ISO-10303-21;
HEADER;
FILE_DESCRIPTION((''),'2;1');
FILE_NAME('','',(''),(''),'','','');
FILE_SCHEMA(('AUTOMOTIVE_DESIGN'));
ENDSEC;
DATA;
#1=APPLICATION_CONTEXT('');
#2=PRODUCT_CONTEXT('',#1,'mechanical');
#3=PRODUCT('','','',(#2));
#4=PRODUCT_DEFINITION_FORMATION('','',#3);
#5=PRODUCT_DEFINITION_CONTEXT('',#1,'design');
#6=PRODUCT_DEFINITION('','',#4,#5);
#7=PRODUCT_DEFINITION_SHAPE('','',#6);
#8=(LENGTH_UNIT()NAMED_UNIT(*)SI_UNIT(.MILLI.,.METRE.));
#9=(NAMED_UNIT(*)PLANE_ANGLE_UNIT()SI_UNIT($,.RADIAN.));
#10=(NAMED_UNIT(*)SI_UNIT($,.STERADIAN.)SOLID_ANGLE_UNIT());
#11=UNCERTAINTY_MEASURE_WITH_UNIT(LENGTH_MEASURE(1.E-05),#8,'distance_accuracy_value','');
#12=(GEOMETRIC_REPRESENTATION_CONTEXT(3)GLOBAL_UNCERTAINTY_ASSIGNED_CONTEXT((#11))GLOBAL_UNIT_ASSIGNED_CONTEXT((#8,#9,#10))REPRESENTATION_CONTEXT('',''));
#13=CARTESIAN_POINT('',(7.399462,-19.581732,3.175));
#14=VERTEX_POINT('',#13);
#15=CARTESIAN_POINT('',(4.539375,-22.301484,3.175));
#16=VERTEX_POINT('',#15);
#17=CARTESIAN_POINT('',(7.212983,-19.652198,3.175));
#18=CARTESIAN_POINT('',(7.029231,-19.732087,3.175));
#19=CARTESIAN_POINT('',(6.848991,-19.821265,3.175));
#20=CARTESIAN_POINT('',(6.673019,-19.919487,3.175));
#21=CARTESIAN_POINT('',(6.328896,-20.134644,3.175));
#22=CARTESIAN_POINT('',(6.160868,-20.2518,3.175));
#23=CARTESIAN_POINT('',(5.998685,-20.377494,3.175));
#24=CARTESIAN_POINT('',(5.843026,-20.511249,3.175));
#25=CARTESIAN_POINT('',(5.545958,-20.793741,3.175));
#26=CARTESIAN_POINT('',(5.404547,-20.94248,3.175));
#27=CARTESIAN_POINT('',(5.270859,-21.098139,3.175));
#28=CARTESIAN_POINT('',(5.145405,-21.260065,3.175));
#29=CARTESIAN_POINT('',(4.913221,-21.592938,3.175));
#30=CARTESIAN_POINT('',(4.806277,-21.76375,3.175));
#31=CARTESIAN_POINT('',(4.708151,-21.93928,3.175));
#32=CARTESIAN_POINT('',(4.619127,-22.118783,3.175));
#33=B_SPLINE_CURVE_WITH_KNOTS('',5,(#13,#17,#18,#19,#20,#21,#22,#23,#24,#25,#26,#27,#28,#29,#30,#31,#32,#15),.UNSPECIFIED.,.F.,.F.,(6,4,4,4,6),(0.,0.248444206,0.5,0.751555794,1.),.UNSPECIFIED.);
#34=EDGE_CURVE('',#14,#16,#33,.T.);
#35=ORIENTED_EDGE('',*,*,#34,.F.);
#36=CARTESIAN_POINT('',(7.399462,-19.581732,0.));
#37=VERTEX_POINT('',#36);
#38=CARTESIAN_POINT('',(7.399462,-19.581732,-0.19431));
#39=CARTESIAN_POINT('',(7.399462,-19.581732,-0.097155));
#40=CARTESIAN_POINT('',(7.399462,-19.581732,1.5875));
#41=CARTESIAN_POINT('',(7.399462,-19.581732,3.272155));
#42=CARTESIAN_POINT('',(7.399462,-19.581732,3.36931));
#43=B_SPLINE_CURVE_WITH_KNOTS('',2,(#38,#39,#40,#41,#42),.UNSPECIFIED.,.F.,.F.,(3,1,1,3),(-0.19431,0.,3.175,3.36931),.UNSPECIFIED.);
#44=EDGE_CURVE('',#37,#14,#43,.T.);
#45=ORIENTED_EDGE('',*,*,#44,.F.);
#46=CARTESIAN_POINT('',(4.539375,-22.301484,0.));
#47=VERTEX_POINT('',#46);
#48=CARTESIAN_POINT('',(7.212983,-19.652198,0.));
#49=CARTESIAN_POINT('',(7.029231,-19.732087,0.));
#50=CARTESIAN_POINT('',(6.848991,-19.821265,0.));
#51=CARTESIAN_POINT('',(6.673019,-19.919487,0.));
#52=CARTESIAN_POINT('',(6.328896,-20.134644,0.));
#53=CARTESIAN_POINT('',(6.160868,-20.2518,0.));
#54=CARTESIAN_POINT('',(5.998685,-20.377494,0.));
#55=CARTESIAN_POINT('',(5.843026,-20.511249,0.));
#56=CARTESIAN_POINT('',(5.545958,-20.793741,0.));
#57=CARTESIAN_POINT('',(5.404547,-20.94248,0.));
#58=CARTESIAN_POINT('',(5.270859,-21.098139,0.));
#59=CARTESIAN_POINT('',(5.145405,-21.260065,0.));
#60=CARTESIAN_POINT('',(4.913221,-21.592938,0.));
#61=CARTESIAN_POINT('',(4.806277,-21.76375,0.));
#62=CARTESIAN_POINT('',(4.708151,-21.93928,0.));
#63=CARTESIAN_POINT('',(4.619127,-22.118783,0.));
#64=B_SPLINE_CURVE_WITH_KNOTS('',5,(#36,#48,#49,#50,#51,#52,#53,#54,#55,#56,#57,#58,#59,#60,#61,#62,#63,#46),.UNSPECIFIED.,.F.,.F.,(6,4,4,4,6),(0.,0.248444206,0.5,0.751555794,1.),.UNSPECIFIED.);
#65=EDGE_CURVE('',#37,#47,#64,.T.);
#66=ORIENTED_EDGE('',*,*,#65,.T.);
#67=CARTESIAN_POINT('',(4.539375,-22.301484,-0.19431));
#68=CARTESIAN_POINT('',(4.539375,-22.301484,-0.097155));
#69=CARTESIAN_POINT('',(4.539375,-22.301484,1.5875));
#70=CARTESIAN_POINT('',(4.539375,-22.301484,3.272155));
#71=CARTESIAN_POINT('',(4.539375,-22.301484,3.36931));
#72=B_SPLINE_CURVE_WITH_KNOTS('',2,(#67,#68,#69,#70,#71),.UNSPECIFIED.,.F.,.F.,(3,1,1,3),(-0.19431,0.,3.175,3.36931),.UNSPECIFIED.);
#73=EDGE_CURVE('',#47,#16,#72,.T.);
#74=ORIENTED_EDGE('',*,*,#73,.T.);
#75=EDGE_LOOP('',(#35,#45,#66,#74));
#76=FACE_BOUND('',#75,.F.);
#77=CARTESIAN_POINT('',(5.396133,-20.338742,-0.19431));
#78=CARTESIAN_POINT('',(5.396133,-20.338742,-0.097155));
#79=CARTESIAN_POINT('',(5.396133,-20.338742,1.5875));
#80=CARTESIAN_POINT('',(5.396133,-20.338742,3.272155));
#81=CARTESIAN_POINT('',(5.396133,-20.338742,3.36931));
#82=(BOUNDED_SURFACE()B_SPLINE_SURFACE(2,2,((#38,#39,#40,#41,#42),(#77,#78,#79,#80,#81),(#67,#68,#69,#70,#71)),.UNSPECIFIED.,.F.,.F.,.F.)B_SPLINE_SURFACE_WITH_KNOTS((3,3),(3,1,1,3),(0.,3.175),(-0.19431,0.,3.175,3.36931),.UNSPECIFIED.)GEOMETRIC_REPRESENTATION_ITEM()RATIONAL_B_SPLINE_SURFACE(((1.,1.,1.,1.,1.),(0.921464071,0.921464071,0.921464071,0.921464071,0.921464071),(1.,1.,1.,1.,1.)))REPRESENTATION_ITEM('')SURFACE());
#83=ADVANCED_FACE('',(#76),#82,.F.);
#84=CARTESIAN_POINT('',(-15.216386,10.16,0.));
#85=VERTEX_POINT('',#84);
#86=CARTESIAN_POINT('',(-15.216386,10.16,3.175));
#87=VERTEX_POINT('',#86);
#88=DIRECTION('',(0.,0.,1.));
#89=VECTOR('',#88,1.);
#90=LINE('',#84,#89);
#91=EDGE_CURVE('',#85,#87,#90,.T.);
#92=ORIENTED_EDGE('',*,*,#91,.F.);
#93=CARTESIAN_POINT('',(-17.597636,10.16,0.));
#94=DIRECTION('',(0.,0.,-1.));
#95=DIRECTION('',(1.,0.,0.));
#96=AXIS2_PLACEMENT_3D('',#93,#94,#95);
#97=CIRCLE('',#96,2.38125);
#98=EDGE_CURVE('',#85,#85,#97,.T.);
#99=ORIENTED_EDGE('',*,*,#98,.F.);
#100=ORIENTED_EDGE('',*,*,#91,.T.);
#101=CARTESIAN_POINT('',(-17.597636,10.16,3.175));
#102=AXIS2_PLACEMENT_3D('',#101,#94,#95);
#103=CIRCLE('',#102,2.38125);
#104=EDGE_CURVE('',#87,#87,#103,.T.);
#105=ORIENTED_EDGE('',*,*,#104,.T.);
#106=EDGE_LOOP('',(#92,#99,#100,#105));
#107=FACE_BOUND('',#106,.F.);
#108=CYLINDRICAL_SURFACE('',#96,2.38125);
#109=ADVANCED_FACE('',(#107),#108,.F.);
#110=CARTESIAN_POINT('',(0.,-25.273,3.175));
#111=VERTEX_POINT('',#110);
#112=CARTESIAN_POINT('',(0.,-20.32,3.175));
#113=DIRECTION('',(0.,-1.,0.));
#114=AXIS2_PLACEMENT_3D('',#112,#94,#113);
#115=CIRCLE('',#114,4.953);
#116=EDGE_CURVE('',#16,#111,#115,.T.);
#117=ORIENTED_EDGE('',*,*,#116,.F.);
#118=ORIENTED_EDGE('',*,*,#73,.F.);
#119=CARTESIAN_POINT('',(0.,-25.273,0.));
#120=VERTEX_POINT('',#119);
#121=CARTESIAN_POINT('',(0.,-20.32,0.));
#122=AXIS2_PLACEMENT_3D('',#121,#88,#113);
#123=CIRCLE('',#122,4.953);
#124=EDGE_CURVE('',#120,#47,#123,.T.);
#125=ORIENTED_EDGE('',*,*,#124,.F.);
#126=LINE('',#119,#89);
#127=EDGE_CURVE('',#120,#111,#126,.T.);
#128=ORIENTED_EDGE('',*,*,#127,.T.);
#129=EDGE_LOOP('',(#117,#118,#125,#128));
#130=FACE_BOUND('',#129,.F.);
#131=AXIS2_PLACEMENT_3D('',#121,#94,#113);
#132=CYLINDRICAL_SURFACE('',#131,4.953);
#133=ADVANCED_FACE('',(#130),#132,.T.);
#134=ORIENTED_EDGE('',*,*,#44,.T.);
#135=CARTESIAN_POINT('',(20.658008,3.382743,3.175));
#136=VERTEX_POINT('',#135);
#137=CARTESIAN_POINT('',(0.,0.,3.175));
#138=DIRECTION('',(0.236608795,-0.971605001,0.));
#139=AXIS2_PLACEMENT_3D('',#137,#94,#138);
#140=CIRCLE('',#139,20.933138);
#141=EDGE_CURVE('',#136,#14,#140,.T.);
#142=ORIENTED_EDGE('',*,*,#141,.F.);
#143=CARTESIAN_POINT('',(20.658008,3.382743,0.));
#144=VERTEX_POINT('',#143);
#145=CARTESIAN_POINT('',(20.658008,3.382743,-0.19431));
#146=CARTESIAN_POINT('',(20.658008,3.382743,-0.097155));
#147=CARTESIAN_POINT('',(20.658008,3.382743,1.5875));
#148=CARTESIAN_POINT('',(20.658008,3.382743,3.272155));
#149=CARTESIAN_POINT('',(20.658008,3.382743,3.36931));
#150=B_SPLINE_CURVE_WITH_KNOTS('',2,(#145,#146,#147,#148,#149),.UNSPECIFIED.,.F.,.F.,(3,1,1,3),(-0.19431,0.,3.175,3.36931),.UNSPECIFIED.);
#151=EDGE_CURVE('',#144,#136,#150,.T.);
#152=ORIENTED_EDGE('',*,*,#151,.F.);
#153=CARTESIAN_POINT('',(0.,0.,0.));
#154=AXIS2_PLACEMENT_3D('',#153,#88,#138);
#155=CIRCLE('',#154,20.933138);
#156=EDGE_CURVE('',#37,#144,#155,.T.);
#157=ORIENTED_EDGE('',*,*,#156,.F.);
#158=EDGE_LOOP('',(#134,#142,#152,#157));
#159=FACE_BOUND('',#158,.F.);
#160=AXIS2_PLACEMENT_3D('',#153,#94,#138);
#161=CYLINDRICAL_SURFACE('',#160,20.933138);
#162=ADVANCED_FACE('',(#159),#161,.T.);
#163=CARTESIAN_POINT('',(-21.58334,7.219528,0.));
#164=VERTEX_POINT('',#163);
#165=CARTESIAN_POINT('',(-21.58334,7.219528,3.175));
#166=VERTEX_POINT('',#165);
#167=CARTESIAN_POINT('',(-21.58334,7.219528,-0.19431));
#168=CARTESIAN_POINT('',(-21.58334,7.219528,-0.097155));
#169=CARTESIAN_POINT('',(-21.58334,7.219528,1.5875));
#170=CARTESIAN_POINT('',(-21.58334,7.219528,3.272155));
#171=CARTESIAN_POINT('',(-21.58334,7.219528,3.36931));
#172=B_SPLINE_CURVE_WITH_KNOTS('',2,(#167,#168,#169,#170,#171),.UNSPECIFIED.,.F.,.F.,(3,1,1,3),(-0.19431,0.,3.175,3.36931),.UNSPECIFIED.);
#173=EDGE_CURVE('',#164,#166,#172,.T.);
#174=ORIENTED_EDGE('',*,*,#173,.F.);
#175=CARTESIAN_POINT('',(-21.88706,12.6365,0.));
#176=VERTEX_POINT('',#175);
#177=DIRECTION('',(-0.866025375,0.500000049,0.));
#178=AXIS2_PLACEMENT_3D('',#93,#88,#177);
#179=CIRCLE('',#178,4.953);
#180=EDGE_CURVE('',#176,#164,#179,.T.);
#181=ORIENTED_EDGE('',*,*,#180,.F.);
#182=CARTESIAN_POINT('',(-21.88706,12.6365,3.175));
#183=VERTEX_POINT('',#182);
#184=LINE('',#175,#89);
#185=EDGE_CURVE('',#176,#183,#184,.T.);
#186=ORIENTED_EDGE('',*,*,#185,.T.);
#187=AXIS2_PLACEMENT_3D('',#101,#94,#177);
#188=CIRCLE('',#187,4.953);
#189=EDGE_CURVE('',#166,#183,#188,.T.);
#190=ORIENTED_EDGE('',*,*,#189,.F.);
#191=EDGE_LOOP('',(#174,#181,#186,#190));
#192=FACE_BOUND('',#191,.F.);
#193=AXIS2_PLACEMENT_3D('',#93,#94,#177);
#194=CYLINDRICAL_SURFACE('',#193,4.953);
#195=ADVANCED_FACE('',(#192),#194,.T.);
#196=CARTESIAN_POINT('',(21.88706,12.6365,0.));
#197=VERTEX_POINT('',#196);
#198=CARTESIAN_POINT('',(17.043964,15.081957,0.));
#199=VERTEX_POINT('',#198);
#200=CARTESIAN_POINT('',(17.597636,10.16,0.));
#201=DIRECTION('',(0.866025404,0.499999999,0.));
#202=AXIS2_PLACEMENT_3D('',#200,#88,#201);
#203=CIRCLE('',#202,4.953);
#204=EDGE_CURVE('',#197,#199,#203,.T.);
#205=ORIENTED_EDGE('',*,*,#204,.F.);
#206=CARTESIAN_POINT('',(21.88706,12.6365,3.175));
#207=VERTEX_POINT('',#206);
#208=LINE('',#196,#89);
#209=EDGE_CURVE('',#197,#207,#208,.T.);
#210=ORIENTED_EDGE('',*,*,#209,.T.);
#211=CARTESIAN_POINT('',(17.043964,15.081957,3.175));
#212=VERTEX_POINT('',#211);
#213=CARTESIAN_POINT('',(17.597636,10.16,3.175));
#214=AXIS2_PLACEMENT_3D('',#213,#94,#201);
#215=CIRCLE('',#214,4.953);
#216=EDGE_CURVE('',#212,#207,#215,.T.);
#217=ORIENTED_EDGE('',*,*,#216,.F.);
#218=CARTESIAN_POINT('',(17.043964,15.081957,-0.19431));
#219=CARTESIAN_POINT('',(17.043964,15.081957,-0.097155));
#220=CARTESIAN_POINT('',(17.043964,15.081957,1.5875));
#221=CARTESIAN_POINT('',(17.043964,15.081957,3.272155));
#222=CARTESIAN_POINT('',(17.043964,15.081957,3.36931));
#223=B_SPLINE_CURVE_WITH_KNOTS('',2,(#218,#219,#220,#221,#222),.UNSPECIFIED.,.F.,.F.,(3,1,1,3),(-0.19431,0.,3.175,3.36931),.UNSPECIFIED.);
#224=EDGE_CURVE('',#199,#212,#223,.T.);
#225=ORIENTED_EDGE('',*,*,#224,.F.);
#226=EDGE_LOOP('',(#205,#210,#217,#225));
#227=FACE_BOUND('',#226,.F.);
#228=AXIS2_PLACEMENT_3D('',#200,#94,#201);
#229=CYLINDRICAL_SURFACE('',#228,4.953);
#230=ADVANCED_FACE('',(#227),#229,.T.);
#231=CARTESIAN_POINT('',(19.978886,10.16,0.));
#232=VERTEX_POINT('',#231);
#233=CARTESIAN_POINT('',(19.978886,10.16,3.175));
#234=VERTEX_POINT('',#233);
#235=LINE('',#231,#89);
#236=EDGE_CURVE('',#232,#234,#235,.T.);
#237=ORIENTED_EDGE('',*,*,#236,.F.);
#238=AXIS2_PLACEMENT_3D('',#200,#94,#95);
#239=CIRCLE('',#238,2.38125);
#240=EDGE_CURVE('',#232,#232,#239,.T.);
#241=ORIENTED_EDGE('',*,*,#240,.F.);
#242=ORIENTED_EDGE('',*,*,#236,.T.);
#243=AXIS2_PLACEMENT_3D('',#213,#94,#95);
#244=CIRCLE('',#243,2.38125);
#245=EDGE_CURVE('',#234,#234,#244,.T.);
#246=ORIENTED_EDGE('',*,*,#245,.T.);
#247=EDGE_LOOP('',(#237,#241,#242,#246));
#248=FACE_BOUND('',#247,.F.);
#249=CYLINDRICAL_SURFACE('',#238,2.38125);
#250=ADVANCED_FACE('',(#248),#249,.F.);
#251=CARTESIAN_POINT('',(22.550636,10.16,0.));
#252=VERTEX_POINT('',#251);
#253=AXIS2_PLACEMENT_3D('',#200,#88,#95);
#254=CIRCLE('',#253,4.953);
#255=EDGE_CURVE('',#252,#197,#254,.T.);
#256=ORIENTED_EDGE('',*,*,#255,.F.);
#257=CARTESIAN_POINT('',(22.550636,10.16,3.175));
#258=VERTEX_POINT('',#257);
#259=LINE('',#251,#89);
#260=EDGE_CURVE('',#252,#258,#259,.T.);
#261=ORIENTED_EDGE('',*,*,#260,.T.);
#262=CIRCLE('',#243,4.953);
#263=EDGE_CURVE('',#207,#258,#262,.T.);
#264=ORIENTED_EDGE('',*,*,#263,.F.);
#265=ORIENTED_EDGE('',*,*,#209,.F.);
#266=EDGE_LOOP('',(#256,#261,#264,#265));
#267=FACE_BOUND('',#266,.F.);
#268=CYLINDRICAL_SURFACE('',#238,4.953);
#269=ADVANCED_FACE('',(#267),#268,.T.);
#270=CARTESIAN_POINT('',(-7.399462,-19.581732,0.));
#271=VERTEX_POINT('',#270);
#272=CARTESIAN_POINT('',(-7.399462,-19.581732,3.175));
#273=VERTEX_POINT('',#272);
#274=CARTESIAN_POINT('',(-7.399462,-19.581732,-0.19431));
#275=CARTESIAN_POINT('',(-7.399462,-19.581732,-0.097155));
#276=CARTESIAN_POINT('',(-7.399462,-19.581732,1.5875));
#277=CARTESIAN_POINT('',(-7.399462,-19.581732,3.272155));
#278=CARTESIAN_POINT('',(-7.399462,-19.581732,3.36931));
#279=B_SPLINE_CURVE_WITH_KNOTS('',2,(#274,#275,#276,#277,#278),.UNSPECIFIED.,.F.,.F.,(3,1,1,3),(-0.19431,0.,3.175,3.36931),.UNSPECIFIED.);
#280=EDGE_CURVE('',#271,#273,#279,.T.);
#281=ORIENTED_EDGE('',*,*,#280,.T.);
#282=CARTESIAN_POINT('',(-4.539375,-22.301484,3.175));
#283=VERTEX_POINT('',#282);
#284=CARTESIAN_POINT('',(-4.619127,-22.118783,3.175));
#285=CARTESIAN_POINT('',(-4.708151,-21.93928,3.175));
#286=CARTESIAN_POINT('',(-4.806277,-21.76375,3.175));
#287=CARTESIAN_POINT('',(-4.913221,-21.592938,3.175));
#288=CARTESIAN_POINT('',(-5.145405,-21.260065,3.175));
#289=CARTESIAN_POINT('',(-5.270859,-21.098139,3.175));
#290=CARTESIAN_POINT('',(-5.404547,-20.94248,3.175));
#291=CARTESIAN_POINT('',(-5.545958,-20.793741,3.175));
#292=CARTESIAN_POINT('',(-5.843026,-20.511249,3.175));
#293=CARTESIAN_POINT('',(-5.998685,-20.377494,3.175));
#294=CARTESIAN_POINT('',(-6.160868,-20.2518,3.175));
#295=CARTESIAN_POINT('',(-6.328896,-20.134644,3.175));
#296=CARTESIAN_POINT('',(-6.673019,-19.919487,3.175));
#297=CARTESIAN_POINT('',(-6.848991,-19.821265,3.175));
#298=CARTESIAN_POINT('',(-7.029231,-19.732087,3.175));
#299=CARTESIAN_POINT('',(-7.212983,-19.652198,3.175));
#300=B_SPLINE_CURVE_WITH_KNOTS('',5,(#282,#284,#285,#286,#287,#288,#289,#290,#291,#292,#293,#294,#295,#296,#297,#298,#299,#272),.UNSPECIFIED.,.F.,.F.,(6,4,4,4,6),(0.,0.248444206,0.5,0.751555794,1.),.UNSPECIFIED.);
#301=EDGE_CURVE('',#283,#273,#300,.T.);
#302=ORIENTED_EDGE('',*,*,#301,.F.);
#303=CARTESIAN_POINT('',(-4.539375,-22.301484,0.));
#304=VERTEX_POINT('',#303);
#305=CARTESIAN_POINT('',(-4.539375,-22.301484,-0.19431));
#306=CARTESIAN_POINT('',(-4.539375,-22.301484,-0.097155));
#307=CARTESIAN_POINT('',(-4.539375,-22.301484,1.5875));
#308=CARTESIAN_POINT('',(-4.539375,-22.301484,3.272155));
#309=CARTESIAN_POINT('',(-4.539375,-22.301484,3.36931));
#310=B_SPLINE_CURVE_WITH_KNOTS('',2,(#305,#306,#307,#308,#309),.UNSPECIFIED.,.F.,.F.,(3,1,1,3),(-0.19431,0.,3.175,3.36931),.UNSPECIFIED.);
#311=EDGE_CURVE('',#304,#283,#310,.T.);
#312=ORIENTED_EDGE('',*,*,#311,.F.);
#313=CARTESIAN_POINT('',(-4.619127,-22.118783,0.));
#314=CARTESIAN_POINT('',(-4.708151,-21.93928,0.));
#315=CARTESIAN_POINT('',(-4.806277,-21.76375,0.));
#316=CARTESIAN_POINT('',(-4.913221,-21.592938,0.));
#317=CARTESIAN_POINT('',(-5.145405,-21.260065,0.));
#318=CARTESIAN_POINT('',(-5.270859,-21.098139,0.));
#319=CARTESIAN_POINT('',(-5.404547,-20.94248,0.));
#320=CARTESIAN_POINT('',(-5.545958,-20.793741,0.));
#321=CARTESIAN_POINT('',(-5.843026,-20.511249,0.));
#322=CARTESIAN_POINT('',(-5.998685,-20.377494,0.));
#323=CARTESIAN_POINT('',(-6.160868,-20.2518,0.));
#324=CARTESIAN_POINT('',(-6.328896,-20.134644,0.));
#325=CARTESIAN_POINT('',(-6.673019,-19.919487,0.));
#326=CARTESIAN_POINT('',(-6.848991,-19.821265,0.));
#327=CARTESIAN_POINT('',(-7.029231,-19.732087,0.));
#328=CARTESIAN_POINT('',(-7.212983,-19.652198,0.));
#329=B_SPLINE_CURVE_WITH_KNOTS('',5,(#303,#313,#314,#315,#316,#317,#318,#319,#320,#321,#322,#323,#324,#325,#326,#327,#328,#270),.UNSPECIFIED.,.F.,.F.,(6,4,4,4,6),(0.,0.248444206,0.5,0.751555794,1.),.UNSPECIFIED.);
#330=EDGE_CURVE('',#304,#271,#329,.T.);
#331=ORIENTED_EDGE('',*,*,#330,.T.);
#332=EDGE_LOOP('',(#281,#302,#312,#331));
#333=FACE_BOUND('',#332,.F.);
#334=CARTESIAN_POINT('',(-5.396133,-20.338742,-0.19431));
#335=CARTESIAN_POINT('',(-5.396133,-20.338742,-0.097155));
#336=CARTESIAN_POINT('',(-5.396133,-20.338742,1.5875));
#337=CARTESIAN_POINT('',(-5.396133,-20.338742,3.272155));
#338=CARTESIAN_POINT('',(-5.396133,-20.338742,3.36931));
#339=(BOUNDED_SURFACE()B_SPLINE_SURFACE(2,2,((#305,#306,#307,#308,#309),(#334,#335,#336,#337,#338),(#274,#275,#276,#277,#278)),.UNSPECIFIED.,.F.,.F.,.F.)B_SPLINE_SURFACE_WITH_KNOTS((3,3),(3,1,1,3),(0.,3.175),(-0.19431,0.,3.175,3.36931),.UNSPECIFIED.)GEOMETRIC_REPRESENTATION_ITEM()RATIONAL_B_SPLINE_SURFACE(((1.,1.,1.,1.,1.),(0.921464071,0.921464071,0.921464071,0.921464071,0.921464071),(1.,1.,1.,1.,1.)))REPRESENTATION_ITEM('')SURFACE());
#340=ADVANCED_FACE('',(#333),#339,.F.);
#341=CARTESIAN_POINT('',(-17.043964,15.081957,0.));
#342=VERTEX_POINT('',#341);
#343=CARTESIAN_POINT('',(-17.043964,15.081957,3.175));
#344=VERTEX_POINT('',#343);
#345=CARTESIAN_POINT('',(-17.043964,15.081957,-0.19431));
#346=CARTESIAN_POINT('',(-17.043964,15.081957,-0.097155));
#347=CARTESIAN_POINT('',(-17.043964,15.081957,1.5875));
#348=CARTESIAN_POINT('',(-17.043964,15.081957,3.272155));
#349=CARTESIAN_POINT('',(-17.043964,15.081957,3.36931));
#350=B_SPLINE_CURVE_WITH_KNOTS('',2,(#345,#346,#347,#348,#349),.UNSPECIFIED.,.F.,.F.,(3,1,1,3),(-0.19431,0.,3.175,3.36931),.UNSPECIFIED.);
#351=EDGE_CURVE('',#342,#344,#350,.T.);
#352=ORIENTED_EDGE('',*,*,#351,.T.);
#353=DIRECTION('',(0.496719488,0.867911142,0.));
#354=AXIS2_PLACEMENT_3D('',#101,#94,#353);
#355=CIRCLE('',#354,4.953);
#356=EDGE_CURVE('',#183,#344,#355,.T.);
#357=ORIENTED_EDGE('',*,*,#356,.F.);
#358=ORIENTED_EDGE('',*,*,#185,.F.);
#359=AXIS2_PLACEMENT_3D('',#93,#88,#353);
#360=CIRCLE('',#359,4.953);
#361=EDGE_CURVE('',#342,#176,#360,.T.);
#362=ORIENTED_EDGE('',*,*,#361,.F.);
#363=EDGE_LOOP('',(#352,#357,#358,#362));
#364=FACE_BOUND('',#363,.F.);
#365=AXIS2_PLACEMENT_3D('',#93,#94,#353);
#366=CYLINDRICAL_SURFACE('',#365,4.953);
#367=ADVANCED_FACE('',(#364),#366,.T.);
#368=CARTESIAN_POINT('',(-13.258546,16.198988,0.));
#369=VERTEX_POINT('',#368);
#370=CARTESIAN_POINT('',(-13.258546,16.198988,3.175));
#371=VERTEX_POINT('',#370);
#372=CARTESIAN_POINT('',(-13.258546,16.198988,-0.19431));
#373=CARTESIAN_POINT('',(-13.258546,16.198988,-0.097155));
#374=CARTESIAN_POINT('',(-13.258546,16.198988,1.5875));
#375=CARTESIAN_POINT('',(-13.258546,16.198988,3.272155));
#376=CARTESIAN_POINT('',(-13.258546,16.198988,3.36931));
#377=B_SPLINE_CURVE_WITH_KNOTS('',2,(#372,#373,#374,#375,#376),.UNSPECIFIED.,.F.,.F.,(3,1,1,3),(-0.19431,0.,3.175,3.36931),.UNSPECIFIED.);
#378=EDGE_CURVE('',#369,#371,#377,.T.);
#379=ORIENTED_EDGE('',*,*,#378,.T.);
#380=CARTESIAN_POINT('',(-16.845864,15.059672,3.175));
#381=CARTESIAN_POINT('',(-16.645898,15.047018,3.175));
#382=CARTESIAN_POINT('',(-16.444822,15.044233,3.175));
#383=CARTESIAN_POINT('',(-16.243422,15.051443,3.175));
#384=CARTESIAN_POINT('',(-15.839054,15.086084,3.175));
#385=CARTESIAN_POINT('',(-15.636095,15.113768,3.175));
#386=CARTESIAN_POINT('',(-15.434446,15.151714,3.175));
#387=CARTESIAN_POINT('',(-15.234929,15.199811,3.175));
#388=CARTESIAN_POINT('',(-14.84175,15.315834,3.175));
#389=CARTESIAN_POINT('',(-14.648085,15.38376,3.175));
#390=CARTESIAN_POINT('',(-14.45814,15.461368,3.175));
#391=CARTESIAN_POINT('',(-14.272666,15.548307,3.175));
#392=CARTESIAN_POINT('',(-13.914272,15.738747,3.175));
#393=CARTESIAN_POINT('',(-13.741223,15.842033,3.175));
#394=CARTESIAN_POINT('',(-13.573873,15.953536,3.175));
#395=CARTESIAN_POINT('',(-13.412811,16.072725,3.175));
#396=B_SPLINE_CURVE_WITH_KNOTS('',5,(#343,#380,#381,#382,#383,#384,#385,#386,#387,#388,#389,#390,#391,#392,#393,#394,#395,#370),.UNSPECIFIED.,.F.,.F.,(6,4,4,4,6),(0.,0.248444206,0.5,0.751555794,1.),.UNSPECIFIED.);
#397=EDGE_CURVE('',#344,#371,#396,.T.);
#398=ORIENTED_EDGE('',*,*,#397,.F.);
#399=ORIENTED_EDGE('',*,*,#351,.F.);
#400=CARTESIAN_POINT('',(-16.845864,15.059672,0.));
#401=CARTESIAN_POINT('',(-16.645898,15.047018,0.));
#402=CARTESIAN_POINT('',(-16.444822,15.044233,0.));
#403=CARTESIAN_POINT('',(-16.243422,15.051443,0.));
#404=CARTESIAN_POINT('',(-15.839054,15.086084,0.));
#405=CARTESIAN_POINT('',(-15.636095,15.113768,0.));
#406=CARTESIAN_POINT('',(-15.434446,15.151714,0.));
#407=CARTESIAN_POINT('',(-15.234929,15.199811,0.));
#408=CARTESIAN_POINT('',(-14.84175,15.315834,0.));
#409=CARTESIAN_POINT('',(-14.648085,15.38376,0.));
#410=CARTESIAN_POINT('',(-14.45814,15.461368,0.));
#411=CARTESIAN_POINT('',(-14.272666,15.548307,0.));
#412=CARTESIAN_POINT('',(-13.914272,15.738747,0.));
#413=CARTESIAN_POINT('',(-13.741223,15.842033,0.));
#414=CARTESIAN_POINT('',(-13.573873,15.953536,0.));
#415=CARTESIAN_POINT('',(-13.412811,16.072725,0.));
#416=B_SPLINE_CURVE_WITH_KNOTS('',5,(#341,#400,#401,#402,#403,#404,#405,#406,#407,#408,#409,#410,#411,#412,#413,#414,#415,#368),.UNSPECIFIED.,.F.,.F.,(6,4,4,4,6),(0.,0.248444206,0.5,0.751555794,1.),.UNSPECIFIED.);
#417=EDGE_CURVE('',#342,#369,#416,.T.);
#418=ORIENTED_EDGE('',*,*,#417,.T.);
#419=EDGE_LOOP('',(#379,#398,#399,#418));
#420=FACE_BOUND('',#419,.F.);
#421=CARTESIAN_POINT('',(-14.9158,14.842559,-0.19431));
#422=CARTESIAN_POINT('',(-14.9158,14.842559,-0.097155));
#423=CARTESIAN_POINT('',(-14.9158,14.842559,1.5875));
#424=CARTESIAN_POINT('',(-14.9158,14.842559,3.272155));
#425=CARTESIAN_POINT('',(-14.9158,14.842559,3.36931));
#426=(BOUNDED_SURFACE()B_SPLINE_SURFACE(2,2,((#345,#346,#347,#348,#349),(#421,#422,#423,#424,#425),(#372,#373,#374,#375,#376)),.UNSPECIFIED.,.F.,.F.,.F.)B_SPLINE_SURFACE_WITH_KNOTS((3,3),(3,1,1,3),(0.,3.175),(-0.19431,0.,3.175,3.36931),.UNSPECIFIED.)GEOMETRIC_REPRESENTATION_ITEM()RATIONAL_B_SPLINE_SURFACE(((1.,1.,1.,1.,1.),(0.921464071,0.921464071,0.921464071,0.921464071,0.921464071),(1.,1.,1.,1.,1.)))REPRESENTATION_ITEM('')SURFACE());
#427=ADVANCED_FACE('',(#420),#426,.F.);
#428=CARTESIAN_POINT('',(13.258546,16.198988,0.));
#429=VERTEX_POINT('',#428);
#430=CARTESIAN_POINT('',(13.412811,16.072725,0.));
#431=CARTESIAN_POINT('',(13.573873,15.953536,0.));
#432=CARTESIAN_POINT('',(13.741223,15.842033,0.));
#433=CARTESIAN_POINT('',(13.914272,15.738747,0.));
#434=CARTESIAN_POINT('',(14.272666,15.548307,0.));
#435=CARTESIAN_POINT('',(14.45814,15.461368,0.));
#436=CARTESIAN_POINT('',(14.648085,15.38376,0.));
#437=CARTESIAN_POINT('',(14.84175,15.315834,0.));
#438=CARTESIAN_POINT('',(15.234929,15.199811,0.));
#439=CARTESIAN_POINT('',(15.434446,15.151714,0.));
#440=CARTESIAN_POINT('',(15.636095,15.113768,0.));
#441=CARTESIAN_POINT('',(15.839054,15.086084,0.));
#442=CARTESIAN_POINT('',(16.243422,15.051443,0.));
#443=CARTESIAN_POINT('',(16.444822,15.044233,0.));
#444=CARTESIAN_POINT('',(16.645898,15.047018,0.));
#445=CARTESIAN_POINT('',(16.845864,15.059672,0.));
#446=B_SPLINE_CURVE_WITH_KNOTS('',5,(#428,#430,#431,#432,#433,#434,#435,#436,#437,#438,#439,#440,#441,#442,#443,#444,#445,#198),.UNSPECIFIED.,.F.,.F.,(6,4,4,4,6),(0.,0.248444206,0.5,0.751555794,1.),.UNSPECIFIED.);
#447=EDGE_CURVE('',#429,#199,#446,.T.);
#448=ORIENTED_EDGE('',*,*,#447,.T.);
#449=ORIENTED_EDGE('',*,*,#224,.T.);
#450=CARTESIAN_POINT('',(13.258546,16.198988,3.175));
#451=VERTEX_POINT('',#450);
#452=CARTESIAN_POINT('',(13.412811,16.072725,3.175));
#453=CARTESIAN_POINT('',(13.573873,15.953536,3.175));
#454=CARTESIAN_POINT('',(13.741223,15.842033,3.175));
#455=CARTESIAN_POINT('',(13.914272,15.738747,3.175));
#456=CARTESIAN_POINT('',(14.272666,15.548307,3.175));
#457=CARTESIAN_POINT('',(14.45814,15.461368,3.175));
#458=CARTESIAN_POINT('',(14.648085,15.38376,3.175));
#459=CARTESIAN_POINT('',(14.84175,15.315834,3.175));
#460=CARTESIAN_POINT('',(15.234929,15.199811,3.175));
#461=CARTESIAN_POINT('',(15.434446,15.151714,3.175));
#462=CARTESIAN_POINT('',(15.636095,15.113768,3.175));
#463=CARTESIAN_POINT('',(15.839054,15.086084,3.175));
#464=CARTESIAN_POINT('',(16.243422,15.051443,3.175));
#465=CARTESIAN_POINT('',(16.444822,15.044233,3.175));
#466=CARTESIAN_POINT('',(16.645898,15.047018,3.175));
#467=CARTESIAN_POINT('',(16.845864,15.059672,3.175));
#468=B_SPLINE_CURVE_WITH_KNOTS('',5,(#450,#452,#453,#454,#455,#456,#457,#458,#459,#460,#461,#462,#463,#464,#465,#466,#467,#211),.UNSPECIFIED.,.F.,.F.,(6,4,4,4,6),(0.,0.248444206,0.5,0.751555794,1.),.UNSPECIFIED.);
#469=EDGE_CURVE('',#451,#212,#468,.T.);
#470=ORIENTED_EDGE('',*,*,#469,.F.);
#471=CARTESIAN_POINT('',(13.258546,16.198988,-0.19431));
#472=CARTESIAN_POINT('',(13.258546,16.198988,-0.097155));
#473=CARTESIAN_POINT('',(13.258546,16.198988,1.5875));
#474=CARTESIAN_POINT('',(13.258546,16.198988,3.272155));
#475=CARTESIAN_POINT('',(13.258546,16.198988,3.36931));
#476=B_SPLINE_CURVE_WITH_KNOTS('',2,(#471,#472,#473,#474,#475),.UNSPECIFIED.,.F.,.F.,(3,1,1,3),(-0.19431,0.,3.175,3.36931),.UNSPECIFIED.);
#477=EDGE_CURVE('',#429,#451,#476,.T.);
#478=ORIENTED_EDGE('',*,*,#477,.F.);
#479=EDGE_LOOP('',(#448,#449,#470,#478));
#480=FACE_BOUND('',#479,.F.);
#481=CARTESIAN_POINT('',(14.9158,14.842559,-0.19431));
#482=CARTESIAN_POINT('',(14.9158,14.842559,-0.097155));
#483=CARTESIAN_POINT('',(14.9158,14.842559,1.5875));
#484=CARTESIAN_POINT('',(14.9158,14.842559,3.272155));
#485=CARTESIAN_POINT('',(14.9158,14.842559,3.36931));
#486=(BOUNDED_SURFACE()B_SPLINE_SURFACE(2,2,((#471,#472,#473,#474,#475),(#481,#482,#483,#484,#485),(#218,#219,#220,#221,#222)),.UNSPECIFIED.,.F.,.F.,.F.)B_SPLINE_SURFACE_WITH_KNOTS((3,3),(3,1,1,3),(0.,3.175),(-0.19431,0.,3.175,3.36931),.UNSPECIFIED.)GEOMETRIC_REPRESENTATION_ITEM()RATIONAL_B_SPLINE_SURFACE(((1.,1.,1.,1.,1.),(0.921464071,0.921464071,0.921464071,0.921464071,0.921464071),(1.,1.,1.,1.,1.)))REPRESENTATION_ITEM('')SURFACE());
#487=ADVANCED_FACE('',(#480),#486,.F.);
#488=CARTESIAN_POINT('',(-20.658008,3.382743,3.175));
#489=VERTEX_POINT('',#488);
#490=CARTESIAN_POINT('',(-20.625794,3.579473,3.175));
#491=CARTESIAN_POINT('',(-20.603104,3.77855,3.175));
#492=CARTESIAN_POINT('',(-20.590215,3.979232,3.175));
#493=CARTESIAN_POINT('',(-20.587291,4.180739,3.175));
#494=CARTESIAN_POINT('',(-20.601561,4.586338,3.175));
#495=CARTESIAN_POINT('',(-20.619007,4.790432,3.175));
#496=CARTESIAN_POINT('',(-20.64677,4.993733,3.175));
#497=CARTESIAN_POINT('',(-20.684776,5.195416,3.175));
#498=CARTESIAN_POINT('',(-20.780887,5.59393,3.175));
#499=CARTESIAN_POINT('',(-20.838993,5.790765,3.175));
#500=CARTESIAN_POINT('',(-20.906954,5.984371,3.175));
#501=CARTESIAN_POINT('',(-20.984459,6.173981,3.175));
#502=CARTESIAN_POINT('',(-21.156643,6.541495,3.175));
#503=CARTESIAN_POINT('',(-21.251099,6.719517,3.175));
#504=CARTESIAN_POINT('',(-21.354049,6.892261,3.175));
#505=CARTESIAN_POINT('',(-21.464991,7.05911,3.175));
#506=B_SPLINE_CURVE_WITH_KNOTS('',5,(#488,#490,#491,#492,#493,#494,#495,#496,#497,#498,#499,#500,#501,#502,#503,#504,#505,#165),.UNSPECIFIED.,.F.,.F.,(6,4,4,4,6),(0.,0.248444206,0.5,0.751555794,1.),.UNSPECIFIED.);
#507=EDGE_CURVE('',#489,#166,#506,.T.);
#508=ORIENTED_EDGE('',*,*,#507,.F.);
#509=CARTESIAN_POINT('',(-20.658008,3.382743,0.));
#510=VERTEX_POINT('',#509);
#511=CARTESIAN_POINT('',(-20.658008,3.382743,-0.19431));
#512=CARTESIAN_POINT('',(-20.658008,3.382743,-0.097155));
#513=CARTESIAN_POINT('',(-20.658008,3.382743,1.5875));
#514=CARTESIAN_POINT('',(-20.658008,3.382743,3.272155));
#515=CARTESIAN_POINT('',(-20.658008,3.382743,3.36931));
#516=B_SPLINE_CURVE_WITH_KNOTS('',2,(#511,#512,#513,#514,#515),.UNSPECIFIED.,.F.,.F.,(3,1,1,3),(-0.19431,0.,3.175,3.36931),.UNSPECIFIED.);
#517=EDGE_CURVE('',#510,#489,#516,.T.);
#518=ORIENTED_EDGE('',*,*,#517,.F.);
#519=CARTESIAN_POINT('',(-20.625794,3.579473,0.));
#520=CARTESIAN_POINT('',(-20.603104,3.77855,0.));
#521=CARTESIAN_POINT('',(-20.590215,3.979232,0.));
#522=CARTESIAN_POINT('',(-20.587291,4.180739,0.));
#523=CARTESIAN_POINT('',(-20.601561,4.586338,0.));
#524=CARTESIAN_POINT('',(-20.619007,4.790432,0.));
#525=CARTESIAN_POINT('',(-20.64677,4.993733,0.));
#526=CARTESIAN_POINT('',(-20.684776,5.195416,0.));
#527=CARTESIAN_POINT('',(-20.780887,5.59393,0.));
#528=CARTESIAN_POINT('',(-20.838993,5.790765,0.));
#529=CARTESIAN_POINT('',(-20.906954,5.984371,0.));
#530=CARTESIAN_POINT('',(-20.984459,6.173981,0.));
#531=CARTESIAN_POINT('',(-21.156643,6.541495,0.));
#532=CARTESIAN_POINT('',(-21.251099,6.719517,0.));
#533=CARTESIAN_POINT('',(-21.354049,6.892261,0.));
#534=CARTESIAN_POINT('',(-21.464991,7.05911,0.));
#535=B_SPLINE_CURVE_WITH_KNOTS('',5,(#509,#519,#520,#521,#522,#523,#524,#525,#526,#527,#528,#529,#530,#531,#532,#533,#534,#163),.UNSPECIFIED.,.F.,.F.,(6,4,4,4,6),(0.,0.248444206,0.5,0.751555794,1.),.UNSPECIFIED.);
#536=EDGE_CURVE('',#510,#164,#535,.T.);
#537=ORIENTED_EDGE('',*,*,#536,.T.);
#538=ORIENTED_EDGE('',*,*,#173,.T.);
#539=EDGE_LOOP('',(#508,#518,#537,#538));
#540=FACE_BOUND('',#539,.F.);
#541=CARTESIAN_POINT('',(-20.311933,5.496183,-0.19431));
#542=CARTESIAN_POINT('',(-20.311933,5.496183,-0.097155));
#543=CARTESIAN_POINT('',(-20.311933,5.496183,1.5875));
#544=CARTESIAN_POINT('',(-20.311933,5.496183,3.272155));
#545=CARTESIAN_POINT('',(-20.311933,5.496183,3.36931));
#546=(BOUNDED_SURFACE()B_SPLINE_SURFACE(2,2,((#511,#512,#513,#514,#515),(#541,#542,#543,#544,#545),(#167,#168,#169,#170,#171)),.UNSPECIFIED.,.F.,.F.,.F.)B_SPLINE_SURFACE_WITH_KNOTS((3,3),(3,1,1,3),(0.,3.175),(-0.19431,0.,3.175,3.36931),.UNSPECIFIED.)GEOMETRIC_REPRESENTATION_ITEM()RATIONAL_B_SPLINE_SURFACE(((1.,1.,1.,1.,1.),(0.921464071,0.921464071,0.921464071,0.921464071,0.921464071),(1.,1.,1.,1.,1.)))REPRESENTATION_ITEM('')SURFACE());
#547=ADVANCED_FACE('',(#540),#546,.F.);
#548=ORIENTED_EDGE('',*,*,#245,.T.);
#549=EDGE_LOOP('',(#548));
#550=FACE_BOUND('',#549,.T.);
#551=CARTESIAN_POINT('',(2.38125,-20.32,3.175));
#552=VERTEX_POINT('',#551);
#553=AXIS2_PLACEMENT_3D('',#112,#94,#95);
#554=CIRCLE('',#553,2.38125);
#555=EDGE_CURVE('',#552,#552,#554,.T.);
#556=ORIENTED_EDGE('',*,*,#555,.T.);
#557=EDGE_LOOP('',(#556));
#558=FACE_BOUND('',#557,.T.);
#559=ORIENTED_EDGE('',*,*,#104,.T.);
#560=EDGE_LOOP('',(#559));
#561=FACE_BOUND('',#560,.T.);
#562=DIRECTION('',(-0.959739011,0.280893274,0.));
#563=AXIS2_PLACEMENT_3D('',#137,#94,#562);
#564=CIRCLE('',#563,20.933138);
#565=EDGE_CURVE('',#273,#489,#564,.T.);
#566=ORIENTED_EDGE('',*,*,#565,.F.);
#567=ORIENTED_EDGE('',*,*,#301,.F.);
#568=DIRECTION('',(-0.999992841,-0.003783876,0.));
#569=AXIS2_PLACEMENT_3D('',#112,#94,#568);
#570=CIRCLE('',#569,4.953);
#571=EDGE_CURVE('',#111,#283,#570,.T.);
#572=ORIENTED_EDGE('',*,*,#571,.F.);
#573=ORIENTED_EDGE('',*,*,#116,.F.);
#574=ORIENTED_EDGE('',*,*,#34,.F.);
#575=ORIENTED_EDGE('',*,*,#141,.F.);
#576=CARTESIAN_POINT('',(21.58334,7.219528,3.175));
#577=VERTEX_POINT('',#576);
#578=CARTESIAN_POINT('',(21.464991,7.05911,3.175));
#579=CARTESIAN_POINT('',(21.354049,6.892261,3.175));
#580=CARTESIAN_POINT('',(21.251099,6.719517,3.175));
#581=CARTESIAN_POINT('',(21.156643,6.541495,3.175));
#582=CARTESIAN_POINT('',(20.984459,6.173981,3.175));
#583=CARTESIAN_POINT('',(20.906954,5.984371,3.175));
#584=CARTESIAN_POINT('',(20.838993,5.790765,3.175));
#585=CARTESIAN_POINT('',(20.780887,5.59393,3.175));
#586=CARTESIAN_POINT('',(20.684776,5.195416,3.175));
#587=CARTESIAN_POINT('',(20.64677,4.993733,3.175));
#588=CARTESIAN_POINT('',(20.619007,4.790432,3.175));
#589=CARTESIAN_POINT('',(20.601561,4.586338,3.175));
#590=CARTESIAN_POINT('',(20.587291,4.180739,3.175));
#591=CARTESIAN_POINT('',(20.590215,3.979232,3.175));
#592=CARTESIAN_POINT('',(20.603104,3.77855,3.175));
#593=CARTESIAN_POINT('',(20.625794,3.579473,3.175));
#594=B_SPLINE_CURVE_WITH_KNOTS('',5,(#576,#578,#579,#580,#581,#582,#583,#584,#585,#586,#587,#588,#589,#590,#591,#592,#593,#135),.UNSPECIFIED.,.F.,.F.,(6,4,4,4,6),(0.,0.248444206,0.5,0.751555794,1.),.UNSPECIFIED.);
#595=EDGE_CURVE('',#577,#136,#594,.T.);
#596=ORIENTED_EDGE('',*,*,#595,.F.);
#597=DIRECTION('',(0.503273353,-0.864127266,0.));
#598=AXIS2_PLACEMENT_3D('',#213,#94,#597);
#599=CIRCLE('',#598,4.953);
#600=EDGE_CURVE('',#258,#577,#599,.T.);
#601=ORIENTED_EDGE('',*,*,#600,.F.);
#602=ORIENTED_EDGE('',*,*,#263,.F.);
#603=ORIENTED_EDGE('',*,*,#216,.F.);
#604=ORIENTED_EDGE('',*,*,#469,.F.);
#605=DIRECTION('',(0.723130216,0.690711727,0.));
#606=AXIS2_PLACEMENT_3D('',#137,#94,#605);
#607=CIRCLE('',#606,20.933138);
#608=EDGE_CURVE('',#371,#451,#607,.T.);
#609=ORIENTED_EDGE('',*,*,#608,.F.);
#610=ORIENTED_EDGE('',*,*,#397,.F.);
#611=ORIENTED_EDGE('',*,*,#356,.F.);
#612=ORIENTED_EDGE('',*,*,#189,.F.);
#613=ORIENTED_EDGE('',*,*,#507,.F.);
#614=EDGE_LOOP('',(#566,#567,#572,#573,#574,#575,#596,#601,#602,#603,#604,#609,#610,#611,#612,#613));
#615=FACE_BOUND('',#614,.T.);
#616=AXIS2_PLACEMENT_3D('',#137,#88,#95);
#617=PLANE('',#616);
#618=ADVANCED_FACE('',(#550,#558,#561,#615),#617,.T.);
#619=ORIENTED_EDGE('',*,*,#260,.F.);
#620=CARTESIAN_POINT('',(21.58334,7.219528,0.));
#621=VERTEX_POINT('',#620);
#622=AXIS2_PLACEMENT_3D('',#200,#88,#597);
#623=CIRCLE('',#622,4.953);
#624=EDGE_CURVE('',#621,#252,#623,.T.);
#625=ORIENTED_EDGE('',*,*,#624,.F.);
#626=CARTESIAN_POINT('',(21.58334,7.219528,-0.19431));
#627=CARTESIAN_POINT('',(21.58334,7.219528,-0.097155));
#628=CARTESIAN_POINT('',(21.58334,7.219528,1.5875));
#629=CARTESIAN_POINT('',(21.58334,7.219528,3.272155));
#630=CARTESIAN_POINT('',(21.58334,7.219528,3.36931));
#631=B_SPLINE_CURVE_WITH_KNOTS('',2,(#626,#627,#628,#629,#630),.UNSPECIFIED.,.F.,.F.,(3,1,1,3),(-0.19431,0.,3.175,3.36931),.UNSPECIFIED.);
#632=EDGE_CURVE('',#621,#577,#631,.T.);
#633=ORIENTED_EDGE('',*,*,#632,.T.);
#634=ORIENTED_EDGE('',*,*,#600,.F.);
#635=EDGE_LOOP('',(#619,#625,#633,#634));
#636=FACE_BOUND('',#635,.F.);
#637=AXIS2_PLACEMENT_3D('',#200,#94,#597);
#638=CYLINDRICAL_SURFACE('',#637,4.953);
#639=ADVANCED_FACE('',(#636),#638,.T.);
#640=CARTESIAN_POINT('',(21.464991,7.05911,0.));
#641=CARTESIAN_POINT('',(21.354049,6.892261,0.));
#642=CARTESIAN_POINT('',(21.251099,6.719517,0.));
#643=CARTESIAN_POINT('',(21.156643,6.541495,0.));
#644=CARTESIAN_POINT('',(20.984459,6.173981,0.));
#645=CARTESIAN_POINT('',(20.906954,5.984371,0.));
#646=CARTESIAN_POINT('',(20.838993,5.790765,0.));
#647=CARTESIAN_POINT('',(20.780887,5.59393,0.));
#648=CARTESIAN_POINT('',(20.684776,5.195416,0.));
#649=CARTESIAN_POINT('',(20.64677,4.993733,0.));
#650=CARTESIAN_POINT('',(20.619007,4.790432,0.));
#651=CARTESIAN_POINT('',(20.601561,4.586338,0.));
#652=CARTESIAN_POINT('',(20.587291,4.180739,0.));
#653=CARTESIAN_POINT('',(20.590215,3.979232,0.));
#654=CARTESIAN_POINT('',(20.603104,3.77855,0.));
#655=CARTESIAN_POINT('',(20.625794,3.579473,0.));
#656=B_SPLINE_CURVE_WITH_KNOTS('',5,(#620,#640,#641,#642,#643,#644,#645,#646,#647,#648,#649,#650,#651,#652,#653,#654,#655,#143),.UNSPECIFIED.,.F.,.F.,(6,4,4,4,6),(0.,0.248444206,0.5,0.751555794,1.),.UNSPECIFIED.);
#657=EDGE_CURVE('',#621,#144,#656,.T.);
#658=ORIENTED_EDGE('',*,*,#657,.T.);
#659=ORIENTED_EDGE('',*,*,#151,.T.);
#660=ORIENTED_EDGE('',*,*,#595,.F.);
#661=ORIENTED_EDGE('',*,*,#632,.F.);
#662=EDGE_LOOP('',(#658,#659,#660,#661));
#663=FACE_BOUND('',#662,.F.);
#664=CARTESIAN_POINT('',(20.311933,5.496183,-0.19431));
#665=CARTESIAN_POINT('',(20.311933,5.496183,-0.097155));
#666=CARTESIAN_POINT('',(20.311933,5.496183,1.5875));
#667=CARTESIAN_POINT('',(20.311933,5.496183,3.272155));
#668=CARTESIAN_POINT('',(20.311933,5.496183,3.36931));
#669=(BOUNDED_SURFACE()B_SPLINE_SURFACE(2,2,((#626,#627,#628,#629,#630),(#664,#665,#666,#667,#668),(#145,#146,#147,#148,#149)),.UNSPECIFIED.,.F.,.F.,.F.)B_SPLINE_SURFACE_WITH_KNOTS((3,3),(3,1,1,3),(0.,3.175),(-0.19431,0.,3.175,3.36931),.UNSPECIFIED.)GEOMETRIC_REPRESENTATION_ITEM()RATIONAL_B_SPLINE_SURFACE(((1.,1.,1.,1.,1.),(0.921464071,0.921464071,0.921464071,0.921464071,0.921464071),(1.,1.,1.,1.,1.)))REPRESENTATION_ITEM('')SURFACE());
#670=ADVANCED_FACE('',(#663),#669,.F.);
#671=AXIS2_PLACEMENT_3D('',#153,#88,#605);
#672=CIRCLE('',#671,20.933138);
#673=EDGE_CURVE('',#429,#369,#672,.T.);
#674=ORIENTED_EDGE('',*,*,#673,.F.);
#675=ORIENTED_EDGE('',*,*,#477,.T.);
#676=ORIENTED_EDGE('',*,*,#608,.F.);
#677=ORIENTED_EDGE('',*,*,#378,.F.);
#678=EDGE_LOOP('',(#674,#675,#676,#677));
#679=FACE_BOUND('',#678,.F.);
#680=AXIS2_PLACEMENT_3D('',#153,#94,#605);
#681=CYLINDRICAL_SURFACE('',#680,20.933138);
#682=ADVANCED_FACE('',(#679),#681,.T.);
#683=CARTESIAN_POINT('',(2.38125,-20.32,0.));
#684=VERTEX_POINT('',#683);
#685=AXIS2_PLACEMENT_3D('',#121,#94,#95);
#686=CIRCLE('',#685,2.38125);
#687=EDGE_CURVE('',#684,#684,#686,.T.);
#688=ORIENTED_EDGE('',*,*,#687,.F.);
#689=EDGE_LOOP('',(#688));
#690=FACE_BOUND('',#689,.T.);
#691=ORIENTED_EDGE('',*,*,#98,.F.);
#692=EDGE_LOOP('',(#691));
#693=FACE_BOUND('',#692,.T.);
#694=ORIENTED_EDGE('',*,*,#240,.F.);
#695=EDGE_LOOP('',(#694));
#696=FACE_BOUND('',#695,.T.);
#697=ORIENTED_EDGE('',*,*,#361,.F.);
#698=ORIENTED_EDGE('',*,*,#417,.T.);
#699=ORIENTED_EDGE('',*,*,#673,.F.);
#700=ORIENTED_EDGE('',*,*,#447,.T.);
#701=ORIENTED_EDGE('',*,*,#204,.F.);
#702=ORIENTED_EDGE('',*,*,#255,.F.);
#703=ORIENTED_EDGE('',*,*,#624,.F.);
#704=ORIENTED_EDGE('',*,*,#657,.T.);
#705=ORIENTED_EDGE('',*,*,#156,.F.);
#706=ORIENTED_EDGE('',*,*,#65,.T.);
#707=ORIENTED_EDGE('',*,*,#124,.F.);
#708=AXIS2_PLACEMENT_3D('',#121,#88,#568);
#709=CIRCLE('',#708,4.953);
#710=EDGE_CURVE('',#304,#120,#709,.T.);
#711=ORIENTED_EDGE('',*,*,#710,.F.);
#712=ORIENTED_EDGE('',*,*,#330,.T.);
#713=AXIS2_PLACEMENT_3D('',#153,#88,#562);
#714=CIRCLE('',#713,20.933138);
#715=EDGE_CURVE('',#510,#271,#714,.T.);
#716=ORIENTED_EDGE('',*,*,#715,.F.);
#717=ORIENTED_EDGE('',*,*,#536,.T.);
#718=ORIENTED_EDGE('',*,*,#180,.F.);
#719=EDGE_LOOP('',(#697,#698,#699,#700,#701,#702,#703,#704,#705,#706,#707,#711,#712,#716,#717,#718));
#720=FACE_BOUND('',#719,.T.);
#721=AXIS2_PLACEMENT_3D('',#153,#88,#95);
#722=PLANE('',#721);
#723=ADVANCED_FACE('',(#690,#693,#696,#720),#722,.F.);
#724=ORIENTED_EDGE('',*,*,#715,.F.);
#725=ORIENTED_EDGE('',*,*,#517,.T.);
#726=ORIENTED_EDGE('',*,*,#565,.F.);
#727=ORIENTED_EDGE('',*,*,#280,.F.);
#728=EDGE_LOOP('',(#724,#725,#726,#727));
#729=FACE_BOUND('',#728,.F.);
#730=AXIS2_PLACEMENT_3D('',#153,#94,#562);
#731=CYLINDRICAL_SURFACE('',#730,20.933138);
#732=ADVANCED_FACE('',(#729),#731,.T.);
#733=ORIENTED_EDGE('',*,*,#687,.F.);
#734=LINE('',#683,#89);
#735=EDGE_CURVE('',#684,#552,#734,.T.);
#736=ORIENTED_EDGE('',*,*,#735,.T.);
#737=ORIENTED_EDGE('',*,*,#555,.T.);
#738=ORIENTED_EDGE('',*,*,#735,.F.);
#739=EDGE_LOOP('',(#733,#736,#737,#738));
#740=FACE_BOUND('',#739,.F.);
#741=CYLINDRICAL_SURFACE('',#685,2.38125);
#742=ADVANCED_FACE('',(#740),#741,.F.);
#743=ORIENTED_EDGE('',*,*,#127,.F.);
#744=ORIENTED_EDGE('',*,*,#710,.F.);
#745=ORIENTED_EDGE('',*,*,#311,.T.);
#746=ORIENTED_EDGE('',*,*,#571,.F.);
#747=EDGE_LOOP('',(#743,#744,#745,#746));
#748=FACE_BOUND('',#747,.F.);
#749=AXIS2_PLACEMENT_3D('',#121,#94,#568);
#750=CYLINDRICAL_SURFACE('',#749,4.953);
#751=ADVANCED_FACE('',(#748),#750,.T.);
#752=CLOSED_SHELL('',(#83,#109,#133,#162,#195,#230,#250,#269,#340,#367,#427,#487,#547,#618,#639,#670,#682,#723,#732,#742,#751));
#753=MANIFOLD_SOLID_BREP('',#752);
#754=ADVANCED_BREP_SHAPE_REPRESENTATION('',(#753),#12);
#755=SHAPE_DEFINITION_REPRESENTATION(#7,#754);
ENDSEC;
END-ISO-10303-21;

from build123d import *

# Parameters (mm, degrees)
F1_W      = 8.89
F1_H      = 3.175
F3_R      = 2.38125
F4_DEPTH  = 3.176
F7_DEPTH  = 3.176
F8_R      = 5.08
F9_R      = 27.6252152017
F10_DEPTH = 17.4535782288
F11_R     = 14.5350936127
F12_DEPTH = 3.175


# Not quite as in the source:
# - a fillet or chamfer that OpenCascade refuses, or shapes differently, is made with other operations: its cross-section is extruded or revolved along the edge and cut away or added


with BuildPart() as f2:
    # F1 (on Front) → F2 (revolve)
    with BuildSketch(Plane.XZ):
        with BuildLine():
            ThreePointArc((13.208, -11.9177163316), (13.0652297207, -14.7887805254), (12.3057501177, -17.5612494052))
            Line((12.3057501177, -17.5612494052), (16.383, -17.5612494052))
            Line((16.383, -17.5612494052), (16.383, 0))
            Line((16.383, 0), (16.383, 3.175))
            Line((16.383, 3.175), (13.208, 3.175))
            Line((13.208, 3.175), (13.208, -11.9177163316))
        make_face()
        with Locations((20.828, 1.5875)):
            Rectangle(F1_W, F1_H)
    revolve(axis=Axis((0, 0, -9.4681101426), (0, 0, 1)))

    # F3 (on face) → F4 (cut, through all)
    with BuildSketch(Plane(origin=(0, 0, 0), x_dir=(1, 0, 0), z_dir=(0, 0, -1))):
        with BuildLine():
            ThreePointArc((0, 17.93875), (1.6837980227, 18.6362019773), (2.38125, 20.32))
            ThreePointArc((2.38125, 20.32), (-1.6837980227, 22.0037980227), (0, 17.93875))
        make_face()
        with Locations((-17.5976362049, -10.16)):
            Circle(F3_R)
        with Locations((17.5976362049, -10.16)):
            Circle(F3_R)
    extrude(amount=-F4_DEPTH, mode=Mode.SUBTRACT)

    # F5: fillet of radius 5.08 on 1 edges, made by hand

    # F5_s1 → F5_t2 (revolve, cut)
    with BuildSketch(Plane.XZ):
        with BuildLine():
            ThreePointArc((11.303, -17.5612494052), (14.8951024484, -16.0733518536), (16.383, -12.4812494052))
            Line((16.383, -12.4812494052), (16.383, -17.5612494052))
            Line((16.383, -17.5612494052), (11.303, -17.5612494052))
        make_face()
    revolve(axis=Axis((0, 0, -17.5612494052), (0, 0, 1)), mode=Mode.SUBTRACT)

    # F6 (on face) → F7 (cut, through all)
    with BuildSketch(Plane(origin=(0, 0, 0), x_dir=(1, 0, 0), z_dir=(0, 0, -1))):
        with BuildLine():
            ThreePointArc((-4.952964542, 20.3387415379), (-3.495667473, 23.8289197652), (0, 25.273))
            ThreePointArc((0, 25.273), (-21.8870601005, 12.6364998776), (-21.8870598885, -12.6365002448))
            ThreePointArc((-21.8870598885, -12.6365002448), (-22.3842836342, -8.8871231844), (-20.0903491238, -5.8799776515))
            ThreePointArc((-20.0903491238, -5.8799776515), (-18.1286292594, 10.4665689829), (-4.952964542, 20.3387415379))
        make_face()
        with BuildLine():
            ThreePointArc((0, 25.273), (3.495667473, 23.8289197652), (4.952964542, 20.3387415379))
            ThreePointArc((4.952964542, 20.3387415379), (18.1286292594, 10.4665689829), (20.0903491238, -5.8799776515))
            ThreePointArc((20.0903491238, -5.8799776515), (21.8917377458, -7.6916197707), (22.5506362049, -10.16))
            ThreePointArc((22.5506362049, -10.16), (22.3818668231, -11.4419307281), (21.8870600322, -12.6364999959))
            ThreePointArc((21.8870600322, -12.6364999959), (24.4118434084, -6.5411337246), (25.273, 0))
            ThreePointArc((25.273, 0), (17.8707096809, 17.8707096809), (0, 25.273))
        make_face()
        with BuildLine():
            ThreePointArc((-15.1373845818, -14.4587638864), (-18.8886159884, -14.9417967542), (-21.8870598885, -12.6365002448))
            ThreePointArc((-21.8870598885, -12.6365002448), (1.437e-07, -25.273), (21.8870600322, -12.6364999959))
            ThreePointArc((21.8870600322, -12.6364999959), (18.8886161272, -14.9417967167), (15.1373845818, -14.4587638864))
            ThreePointArc((15.1373845818, -14.4587638864), (0, -20.9331379659), (-15.1373845818, -14.4587638864))
        make_face()
    extrude(amount=-F7_DEPTH, mode=Mode.SUBTRACT)

    # F8
    f8_edges = [f2.edges().sort_by_distance(p)[0] for p in [
        (-15.137385, 14.458764, 1.5875),
        (15.137385, 14.458764, 1.5875),
        (20.090349, 5.879978, 1.5875),
        (4.952965, -20.338742, 1.5875),
        (-4.952965, -20.338742, 1.5875),
        (-20.090349, 5.879978, 1.5875),
    ]]
    fillet(f8_edges, radius=F8_R)

    # F9 (on Top) → F10 (cut, through all)
    with BuildSketch(Plane.XY):
        Circle(F9_R)
    extrude(amount=-F10_DEPTH, mode=Mode.SUBTRACT)

    # F11 (on face) → F12 (join)
    with BuildSketch(Plane(origin=(0, 0, 0), x_dir=(1, 0, 0), z_dir=(0, 0, -1))):
        Circle(F11_R)
    extrude(amount=-F12_DEPTH)


solid = f2.part
